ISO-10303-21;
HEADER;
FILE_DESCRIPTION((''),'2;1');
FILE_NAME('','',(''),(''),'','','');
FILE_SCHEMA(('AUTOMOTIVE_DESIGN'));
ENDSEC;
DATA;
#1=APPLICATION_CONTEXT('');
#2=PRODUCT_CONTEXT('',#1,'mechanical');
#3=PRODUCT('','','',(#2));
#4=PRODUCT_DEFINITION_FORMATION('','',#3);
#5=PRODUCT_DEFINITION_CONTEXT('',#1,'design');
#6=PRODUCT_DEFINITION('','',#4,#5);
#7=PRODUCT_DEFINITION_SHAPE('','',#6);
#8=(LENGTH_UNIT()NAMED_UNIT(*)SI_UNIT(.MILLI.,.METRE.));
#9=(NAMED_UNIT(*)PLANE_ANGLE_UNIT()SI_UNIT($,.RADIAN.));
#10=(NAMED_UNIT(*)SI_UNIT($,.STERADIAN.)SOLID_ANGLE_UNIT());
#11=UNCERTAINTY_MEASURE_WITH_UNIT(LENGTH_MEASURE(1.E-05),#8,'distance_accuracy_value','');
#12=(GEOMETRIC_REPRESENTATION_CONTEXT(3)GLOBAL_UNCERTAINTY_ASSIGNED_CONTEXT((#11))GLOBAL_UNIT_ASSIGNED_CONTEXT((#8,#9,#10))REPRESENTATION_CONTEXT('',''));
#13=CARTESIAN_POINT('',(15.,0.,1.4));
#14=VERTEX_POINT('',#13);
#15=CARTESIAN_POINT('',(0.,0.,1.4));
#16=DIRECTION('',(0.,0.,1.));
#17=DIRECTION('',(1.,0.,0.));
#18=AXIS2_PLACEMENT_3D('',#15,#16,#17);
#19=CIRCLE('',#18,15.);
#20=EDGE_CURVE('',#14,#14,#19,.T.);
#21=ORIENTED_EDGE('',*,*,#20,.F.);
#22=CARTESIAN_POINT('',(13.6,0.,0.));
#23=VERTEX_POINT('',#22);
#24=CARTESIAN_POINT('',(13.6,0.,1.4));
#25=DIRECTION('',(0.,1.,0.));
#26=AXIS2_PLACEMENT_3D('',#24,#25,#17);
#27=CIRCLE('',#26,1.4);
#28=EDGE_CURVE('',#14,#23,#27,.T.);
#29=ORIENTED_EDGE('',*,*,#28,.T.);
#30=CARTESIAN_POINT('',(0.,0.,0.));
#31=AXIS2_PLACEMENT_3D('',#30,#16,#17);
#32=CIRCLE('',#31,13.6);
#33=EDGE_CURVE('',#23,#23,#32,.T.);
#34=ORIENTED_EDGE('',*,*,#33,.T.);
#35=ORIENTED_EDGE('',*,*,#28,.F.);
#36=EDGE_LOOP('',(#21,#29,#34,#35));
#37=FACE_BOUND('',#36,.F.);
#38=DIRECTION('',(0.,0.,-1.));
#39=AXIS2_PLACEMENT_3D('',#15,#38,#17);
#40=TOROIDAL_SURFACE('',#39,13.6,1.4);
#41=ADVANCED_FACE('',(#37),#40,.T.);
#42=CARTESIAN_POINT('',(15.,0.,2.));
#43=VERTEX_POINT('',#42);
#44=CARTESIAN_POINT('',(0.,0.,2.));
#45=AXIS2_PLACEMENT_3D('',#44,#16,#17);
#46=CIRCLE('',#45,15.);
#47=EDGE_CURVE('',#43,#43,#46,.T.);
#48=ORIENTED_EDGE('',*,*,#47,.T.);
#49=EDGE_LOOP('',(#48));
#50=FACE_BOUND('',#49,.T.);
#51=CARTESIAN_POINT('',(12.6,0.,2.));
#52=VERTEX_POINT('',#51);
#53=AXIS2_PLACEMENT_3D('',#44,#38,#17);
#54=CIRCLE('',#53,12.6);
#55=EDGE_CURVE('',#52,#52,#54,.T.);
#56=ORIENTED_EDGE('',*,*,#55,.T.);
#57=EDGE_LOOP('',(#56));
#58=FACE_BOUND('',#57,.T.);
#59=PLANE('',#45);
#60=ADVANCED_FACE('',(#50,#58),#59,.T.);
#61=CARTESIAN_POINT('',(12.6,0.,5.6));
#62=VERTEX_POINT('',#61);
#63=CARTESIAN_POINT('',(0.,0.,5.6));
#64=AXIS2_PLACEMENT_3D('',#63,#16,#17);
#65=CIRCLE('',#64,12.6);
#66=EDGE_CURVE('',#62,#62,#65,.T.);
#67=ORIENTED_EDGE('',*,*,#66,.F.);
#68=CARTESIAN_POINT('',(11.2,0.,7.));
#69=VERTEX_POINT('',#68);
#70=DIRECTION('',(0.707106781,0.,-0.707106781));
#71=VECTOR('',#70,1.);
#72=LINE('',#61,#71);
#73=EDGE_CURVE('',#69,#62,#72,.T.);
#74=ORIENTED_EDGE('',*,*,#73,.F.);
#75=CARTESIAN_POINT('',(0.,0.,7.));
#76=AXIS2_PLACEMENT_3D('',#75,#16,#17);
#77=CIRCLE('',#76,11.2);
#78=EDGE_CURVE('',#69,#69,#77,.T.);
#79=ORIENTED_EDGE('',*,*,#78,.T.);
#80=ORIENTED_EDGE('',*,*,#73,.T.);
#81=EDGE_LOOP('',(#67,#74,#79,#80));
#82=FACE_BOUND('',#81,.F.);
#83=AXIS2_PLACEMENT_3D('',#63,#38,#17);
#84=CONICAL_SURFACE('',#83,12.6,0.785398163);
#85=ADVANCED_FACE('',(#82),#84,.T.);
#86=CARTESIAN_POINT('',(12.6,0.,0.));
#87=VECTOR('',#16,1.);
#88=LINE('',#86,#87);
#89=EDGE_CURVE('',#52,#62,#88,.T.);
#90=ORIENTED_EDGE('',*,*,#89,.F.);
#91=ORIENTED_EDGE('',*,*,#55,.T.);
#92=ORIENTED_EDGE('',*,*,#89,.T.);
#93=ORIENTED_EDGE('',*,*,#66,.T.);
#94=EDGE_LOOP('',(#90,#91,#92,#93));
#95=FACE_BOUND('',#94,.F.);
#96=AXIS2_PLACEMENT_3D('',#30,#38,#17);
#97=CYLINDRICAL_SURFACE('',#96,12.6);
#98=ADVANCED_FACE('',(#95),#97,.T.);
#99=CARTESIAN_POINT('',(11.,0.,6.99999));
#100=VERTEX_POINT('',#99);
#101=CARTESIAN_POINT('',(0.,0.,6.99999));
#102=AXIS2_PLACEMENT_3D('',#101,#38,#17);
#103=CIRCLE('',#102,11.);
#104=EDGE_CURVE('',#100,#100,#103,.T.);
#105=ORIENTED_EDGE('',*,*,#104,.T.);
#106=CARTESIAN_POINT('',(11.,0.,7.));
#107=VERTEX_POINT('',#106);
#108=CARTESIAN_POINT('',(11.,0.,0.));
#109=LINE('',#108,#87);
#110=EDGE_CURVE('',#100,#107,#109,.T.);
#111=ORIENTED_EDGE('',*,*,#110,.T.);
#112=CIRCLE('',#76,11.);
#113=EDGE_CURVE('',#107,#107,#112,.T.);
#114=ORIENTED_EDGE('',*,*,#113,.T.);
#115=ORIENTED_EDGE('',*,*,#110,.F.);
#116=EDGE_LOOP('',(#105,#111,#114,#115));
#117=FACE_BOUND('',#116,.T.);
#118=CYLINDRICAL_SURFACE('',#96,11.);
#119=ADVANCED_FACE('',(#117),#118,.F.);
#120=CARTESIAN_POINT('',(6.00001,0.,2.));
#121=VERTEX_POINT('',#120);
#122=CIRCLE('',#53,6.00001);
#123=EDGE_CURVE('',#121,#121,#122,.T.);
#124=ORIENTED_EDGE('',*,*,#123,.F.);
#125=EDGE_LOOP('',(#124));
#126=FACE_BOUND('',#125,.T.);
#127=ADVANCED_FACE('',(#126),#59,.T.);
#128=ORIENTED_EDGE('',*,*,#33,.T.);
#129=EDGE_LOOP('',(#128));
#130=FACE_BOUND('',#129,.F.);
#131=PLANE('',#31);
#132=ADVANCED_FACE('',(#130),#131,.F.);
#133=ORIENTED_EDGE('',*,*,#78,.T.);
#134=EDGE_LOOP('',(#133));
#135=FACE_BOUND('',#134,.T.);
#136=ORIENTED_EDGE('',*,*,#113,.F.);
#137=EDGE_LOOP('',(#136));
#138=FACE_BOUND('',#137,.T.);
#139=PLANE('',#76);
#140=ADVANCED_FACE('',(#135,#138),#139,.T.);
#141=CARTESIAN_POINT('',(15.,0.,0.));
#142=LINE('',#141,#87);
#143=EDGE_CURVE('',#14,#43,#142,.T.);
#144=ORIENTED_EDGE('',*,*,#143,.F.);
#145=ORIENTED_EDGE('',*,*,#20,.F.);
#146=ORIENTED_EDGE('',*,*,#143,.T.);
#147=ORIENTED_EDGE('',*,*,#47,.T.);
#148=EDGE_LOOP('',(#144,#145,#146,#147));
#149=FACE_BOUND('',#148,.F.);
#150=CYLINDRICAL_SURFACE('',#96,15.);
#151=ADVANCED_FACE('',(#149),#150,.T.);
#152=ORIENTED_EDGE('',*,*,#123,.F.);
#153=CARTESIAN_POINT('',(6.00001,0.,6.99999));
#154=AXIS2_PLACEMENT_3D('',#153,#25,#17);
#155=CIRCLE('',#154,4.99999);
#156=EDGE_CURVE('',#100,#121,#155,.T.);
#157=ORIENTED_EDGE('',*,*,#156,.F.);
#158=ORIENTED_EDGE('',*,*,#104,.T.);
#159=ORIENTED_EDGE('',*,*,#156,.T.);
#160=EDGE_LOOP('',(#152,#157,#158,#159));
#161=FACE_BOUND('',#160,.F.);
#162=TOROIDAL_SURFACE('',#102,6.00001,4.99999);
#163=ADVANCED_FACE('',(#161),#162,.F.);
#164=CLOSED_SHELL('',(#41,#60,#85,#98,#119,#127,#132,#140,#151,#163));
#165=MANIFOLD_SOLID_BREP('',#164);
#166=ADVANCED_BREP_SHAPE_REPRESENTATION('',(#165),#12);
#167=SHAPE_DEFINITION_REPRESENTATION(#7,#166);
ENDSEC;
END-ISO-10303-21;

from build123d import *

# Parameters (mm, degrees)
F0_R     = 15
F0_R_2   = 13
F0_R_3   = 12.6
F0_R_4   = 11
F1_DEPTH = 2
F2_DEPTH = 7
F3_R     = 4.99999
F4_SIZE  = 1.4
F5_R     = 1.4


# Not quite as in the source:
# - a fillet or chamfer is up to 0.001 mm smaller than in the source, because OpenCascade refuses the exact size


with BuildPart() as f1:
    # F0 (on Top) → F1 (new body)
    with BuildSketch(Plane.XY):
        Circle(F0_R)
        Circle(F0_R_2, mode=Mode.SUBTRACT)
        Circle(F0_R_2)
        Circle(F0_R_3, mode=Mode.SUBTRACT)
        Circle(F0_R_3)
        Circle(F0_R_4, mode=Mode.SUBTRACT)
        Circle(F0_R_4)
    extrude(amount=F1_DEPTH)

    # F0 (on Top) → F2 (join)
    with BuildSketch(Plane.XY):
        Circle(F0_R_3)
        Circle(F0_R_4, mode=Mode.SUBTRACT)
    extrude(amount=F2_DEPTH)

    # F3 (radius 5 in the source; OpenCascade refuses exactly that, so slightly less here)
    f3_edges = [f1.edges().sort_by_distance(p)[0] for p in [
        (-11, 0, 2),
    ]]
    fillet(f3_edges, radius=F3_R)

    # F4
    f4_edges = [f1.edges().sort_by_distance(p)[0] for p in [
        (-12.6, 0, 7),
    ]]
    chamfer(f4_edges, length=F4_SIZE)

    # F5
    f5_edges = [f1.edges().sort_by_distance(p)[0] for p in [
        (-15, 0, 0),
    ]]
    fillet(f5_edges, radius=F5_R)


solid = f1.part
